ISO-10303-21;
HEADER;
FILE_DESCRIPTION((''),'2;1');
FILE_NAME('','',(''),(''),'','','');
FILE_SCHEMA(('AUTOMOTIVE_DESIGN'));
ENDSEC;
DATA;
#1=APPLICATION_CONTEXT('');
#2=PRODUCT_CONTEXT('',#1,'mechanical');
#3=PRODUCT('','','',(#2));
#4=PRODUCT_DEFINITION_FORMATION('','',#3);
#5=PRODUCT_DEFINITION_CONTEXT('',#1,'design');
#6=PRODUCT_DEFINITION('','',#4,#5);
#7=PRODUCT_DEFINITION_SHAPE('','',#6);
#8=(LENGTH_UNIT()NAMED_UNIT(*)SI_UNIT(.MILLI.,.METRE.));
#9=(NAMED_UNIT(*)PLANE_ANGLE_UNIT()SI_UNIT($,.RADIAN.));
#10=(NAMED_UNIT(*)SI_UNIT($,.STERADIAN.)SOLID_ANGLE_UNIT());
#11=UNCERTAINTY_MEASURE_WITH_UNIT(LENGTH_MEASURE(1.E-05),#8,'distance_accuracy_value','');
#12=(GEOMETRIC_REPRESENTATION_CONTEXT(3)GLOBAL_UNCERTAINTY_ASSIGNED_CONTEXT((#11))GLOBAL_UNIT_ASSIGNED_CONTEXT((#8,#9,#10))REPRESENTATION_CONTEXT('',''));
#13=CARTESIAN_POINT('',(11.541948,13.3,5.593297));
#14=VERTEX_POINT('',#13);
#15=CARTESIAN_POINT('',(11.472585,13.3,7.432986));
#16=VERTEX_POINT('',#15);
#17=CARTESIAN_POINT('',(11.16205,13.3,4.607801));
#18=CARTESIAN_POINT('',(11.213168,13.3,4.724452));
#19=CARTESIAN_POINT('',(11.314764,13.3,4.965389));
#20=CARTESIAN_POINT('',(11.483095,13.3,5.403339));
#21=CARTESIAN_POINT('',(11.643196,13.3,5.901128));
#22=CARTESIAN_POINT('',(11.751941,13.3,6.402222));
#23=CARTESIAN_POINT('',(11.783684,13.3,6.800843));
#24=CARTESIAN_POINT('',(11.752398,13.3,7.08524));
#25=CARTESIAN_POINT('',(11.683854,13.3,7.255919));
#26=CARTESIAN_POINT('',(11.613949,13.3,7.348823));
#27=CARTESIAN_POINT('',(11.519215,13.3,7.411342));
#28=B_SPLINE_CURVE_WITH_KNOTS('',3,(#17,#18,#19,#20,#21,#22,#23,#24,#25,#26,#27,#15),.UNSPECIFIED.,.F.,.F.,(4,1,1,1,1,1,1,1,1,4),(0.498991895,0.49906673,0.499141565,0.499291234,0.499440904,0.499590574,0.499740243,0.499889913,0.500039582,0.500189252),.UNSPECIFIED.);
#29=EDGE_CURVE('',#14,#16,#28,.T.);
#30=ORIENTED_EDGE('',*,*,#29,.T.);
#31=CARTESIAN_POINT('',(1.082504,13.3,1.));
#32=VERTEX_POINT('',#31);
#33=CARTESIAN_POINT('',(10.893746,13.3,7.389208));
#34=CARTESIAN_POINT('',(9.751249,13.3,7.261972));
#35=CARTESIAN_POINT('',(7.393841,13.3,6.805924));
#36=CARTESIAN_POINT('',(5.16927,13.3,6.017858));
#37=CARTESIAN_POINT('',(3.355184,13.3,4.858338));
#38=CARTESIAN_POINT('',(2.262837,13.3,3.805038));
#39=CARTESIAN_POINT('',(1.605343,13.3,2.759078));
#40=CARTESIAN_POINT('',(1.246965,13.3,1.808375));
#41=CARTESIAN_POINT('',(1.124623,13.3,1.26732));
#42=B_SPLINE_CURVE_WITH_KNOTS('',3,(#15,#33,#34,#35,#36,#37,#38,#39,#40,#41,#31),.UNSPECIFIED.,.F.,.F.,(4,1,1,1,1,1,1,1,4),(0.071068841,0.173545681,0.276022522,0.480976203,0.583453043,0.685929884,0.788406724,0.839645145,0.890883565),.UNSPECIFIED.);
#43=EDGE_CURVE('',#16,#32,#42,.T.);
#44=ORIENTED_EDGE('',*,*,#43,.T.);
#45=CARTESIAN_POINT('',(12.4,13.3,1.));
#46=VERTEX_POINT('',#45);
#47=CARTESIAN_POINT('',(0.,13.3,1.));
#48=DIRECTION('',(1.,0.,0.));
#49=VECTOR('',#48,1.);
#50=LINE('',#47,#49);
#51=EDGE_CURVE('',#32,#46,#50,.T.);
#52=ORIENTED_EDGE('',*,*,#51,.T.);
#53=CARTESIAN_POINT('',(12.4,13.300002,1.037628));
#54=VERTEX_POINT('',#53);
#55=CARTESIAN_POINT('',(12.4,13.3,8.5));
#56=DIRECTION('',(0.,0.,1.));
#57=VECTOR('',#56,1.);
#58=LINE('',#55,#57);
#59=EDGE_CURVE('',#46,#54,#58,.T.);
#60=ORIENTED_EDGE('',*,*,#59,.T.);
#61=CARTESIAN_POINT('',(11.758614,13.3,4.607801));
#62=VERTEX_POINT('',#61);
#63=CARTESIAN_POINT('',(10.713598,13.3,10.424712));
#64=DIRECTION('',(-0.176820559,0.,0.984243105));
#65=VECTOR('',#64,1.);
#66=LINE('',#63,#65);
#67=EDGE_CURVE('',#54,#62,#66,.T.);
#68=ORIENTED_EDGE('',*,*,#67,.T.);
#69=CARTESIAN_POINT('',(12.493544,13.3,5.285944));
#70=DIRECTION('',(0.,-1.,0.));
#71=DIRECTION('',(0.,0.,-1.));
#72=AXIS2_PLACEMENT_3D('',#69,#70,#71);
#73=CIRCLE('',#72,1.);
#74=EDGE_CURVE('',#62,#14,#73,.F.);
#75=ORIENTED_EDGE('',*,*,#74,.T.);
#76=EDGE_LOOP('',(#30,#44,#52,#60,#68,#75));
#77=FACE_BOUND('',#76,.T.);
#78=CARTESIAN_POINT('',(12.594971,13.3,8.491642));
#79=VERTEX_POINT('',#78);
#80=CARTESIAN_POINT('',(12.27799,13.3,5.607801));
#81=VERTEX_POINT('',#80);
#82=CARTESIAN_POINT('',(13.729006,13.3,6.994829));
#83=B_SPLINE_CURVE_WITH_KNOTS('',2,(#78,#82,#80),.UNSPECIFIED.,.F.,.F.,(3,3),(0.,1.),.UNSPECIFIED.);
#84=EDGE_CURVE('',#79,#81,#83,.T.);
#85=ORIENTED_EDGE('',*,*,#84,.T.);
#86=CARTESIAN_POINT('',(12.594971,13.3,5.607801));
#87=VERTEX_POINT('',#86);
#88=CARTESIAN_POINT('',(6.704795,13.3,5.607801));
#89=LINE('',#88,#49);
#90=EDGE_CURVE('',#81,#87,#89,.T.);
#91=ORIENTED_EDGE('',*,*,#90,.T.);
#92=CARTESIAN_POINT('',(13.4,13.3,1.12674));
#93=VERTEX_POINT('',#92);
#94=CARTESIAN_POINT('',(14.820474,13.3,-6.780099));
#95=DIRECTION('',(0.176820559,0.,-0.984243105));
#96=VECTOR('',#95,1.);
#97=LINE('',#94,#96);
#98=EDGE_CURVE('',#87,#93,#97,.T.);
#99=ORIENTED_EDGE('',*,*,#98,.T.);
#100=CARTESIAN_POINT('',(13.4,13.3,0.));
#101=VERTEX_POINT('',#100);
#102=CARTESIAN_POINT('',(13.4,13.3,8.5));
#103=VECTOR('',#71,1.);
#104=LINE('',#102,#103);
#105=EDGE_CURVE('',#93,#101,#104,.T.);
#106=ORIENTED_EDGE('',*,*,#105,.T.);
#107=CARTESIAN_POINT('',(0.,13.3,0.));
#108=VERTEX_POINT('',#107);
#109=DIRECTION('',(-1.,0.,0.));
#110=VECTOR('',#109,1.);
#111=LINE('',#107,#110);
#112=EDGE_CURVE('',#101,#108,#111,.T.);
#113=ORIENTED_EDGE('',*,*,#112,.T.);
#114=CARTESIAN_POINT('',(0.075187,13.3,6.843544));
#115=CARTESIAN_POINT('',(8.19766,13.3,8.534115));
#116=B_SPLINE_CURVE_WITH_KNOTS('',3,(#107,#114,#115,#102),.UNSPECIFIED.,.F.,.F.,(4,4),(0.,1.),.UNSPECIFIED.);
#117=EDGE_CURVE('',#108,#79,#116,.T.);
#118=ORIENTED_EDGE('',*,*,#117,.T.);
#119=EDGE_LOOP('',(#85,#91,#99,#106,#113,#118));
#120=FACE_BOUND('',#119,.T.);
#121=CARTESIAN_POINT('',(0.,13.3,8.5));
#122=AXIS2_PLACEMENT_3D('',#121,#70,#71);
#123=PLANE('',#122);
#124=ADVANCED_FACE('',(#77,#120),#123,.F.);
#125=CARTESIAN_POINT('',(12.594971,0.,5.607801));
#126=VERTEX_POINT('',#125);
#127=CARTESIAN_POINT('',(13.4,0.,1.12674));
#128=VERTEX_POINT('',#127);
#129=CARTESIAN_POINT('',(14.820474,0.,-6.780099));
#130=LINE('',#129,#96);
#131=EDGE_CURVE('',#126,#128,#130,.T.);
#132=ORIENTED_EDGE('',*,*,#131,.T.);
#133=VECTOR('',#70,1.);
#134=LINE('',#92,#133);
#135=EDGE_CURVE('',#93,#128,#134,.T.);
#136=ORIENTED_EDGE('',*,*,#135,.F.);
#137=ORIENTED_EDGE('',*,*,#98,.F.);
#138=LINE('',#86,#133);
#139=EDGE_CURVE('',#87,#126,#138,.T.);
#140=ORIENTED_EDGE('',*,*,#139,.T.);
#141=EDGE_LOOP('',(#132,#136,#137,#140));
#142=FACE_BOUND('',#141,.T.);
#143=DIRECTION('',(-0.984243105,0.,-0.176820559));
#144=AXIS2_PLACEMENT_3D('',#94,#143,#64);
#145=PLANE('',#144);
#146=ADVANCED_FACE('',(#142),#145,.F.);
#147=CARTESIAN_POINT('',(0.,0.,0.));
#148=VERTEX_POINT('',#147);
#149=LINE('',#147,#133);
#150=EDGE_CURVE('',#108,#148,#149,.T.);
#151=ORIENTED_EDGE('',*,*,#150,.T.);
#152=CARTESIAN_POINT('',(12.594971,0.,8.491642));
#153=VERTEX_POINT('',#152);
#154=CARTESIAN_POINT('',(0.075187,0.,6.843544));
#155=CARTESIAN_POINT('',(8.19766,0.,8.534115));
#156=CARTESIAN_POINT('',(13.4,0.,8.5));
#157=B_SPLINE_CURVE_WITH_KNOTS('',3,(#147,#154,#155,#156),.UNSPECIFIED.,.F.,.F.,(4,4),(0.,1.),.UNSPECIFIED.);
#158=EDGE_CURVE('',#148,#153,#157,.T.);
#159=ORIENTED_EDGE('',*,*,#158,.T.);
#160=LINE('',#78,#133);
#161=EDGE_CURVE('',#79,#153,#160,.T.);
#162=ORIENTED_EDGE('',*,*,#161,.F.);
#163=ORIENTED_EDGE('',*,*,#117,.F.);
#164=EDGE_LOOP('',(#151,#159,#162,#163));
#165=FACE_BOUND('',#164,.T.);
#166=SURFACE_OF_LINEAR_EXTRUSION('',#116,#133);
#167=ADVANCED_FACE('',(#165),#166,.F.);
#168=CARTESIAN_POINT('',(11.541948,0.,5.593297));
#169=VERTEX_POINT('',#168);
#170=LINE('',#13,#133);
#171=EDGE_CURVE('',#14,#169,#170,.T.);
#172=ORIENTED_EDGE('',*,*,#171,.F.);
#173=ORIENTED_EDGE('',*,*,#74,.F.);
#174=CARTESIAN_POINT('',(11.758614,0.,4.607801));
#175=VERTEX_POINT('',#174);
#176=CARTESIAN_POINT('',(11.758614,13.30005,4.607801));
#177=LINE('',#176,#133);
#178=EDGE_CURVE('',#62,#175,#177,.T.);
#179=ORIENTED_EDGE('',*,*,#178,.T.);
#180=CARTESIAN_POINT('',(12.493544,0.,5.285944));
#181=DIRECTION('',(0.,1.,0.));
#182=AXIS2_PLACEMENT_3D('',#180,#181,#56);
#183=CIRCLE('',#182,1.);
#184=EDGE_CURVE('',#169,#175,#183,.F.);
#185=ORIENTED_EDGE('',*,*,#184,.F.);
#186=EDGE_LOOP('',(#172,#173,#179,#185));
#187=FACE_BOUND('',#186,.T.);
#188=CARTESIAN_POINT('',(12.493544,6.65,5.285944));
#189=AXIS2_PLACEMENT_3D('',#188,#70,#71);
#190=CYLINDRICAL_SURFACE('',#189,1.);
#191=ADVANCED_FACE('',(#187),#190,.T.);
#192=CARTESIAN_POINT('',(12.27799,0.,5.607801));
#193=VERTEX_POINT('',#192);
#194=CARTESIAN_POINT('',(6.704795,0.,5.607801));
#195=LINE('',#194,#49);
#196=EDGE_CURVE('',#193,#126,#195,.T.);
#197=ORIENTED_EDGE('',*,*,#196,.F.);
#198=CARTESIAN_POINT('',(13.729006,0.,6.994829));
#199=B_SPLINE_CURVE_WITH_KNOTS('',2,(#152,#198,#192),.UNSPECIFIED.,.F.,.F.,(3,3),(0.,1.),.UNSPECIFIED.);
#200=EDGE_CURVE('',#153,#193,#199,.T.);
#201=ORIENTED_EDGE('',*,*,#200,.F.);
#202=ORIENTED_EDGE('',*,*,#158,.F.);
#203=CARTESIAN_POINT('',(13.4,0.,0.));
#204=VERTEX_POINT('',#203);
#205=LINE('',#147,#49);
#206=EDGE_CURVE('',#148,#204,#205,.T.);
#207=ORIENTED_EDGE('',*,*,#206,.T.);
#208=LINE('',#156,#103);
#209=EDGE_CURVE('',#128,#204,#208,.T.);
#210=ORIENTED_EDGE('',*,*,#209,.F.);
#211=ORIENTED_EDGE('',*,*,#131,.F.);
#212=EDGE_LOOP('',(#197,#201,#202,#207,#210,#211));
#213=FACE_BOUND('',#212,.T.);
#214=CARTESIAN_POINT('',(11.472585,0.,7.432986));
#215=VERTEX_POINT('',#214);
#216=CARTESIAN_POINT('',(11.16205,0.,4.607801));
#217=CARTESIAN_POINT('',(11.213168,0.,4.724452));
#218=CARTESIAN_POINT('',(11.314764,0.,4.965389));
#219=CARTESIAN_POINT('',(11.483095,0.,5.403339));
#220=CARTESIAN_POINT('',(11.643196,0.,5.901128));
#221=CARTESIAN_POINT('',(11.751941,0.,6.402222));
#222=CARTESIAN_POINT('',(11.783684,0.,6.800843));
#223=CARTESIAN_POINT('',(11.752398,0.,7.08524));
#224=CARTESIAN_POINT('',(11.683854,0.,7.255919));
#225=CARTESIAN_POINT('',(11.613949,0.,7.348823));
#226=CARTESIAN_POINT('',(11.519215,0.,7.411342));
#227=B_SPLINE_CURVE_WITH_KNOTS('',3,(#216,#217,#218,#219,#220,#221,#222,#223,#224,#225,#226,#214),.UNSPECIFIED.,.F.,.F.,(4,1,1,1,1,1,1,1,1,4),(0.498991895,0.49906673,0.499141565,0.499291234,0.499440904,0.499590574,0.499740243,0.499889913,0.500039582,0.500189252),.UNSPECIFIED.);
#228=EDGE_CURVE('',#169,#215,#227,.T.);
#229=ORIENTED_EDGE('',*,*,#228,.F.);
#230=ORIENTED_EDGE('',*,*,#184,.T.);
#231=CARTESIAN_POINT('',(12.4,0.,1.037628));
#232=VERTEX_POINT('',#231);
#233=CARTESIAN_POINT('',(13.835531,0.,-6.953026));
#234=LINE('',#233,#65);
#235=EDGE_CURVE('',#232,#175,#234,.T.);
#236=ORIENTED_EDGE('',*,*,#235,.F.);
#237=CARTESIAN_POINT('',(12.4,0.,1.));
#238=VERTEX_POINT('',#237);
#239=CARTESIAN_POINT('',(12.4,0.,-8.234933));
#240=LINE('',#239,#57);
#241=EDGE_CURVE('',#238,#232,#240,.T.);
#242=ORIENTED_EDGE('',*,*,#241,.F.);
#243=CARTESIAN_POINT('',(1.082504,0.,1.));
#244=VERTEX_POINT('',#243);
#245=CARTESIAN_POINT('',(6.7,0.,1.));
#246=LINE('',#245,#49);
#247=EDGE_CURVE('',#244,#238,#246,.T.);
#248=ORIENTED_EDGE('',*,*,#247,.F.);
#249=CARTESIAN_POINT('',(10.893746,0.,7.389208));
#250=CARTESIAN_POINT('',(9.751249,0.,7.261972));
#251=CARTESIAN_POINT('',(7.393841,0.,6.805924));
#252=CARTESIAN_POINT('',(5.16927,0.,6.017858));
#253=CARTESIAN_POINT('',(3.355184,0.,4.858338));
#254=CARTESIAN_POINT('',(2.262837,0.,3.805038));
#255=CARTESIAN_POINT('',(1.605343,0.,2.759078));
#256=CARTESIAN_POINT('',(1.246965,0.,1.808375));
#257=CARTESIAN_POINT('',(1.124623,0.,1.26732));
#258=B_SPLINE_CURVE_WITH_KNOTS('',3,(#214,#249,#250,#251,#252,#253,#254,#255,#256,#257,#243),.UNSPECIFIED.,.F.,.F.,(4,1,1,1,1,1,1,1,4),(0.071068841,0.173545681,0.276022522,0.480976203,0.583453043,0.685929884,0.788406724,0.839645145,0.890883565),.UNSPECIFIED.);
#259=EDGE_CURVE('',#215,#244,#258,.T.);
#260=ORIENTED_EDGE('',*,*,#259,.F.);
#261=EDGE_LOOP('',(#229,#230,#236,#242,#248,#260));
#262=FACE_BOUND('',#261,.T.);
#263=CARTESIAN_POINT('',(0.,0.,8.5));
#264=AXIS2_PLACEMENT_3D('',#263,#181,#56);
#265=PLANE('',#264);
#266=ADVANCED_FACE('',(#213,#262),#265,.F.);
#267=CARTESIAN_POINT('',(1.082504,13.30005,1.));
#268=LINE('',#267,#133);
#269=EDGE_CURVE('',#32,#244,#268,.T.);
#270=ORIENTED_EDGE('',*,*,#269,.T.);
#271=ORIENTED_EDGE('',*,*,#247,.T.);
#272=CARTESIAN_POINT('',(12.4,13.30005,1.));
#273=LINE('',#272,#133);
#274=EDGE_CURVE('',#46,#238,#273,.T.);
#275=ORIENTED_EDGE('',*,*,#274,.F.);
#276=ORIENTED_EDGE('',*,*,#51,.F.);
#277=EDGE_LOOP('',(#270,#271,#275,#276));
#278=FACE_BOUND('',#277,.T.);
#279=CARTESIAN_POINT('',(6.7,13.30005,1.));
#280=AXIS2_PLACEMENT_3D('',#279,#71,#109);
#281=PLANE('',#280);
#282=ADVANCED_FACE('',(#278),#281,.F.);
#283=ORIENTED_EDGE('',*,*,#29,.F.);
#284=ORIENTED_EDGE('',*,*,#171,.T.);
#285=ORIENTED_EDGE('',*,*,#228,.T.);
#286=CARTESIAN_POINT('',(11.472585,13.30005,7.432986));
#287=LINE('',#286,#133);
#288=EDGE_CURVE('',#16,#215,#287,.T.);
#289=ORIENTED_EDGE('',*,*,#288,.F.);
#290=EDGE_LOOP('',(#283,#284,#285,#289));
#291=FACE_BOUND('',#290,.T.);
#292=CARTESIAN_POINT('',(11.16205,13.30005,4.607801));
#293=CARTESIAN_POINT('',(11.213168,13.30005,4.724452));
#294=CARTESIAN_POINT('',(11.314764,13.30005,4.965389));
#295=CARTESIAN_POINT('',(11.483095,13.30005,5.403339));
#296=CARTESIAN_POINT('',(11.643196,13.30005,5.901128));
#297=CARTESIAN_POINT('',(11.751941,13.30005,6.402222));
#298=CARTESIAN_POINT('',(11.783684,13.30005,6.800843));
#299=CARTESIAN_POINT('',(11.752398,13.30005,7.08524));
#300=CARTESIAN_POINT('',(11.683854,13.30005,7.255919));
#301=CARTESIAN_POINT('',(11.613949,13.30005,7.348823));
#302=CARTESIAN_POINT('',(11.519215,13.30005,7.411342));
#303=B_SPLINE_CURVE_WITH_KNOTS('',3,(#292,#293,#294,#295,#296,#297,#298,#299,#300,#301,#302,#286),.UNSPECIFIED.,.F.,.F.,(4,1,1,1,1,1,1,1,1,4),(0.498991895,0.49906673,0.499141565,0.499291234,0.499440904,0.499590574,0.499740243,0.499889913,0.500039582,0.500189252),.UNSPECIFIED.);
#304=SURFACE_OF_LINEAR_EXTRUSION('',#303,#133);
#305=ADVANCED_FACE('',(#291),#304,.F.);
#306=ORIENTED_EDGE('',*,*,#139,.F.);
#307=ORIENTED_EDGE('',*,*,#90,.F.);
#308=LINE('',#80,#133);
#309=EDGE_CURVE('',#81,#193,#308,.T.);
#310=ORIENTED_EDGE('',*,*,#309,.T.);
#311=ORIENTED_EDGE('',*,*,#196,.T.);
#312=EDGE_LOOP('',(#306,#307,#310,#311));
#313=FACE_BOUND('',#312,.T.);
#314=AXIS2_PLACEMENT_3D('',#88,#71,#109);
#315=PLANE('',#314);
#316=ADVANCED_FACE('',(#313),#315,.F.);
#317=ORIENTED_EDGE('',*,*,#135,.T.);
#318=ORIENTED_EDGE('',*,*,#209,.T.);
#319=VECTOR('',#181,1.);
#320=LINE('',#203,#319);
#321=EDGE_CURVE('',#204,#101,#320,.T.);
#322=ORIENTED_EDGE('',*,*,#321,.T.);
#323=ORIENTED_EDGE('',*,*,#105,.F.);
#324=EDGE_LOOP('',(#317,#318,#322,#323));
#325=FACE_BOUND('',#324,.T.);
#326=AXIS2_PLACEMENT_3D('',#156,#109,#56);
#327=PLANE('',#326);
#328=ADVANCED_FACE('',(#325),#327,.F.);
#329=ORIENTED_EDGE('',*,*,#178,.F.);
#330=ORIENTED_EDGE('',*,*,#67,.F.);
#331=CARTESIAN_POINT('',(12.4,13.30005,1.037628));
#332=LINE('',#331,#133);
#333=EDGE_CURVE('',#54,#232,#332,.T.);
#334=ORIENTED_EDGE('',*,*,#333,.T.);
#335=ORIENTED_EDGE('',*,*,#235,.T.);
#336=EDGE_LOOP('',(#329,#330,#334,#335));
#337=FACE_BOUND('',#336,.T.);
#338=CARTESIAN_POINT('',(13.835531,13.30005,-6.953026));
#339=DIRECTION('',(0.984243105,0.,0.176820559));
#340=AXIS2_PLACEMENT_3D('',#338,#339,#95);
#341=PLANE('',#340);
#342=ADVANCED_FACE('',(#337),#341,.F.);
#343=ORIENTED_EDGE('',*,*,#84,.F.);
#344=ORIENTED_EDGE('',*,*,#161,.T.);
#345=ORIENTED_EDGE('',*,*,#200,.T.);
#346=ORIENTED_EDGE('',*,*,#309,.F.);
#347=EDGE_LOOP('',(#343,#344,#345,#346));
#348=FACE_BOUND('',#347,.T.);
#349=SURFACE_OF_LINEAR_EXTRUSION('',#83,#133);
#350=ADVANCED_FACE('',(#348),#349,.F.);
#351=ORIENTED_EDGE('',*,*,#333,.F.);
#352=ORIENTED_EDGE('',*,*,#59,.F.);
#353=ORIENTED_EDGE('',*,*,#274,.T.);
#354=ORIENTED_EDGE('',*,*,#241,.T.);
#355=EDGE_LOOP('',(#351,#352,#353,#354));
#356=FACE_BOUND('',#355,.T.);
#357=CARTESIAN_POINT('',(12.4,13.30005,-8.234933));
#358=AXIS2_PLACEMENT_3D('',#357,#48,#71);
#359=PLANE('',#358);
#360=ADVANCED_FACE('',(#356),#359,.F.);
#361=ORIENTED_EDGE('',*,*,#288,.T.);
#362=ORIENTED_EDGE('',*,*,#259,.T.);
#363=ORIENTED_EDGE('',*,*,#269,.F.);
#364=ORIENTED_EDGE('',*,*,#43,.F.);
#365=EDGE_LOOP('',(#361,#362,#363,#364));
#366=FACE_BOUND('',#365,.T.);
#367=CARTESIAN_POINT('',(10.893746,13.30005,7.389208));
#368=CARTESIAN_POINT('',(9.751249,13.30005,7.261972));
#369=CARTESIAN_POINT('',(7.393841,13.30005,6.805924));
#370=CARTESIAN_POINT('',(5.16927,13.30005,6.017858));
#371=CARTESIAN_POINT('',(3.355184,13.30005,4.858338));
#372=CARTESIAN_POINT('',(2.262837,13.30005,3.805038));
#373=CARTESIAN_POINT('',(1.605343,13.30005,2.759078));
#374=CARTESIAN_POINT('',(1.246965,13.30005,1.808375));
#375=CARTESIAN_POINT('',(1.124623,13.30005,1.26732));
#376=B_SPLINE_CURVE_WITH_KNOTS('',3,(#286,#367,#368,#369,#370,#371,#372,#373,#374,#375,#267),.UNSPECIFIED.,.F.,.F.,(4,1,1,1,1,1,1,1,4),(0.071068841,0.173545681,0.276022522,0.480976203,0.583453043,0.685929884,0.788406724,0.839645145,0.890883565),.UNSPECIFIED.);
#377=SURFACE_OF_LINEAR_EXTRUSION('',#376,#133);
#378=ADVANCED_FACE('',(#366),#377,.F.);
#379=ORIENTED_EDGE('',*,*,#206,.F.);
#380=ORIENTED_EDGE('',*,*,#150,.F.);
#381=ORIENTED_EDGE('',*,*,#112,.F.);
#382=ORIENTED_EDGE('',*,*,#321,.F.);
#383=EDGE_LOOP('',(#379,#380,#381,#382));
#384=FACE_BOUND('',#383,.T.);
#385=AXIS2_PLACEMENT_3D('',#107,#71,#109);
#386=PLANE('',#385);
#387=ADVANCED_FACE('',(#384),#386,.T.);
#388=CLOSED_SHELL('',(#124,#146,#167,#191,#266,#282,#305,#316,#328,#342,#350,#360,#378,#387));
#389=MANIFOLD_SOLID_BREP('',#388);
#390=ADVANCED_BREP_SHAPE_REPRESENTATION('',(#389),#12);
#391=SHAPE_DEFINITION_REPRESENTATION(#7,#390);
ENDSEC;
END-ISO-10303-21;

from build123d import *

# Parameters (mm, degrees)
SKETCH1_W           = 13.4
SKETCH1_H           = 13.3
BOSS_EXTRUDE1_DEPTH = 8.5
CUT_EXTRUDE1_DEPTH  = 21.705071842
CUT_EXTRUDE3_DEPTH  = 21.705072012
CUT_EXTRUDE4_DEPTH  = 21.701642146
FILLET1_R           = 1


with BuildPart() as part:
    # Sketch1 → Boss-Extrude1 (new body)
    with BuildSketch(Plane.XY):
        with Locations((6.7, 6.65)):
            Rectangle(SKETCH1_W, SKETCH1_H)
    extrude(amount=BOSS_EXTRUDE1_DEPTH)

    # Sketch2 → Cut-Extrude1 (cut, through all)
    with BuildSketch(Plane.XZ):
        with BuildLine():
            Line((0, 8.5), (0, 0))
            add(Edge.make_bspline(
                [(0, 0), (0.073718654, 6.709903839), (7.883498374, 8.466123585), (13.091968121, 8.5)],
                knots=[0, 0, 0, 0, 0.980472066, 0.980472066, 0.980472066, 0.980472066], degree=3))
            Line((13.091968121, 8.5), (0, 8.5))
        make_face()
    extrude(amount=-CUT_EXTRUDE1_DEPTH, mode=Mode.SUBTRACT)

    # Sketch3 → Cut-Extrude3 (cut, through all)
    with BuildSketch(Plane.XZ):
        with BuildLine():
            Line((13.4, 8.5), (13.091968233, 8.5))
            add(Edge.make_bspline(
                [(13.091968233, 8.500000001), (12.928751092, 8.498938421), (12.762979466, 8.4961855), (12.594971465, 8.491641803)],
                knots=[0, 0, 0, 0, 0.030724926, 0.030724926, 0.030724926, 0.030724926], degree=3))
            add(Edge.make_bspline(
                [(12.594971465, 8.491641803), (13.729005702, 6.994828786), (12.27798969, 5.607801465)],
                knots=[0, 0, 0, 1, 1, 1], degree=2))
            Line((12.27798969, 5.607801465), (12.594971465, 5.607801465))
            Line((12.594971465, 5.607801465), (13.4, 1.126740045))
            Line((13.4, 1.126740045), (13.4, 8.5))
        make_face()
    extrude(amount=-CUT_EXTRUDE3_DEPTH, mode=Mode.SUBTRACT)

    # Sketch4 → Cut-Extrude4 (cut, through all)
    with BuildSketch(Plane.XZ):
        with BuildLine():
            add(Edge.make_bspline(
                [(11.162050454, 4.607801465), (11.213167508, 4.724451541), (11.314763824, 4.965389249), (11.483094832, 5.403338852), (11.643196268, 5.901128047), (11.751940563, 6.402221541), (11.783684476, 6.800842723), (11.752398283, 7.085240041), (11.683853846, 7.255919003), (11.613948948, 7.348822838), (11.519214994, 7.411341569), (11.47258496, 7.432985767)],
                knots=[0.498991895, 0.498991895, 0.498991895, 0.498991895, 0.49906673, 0.499141565, 0.499291234, 0.499440904, 0.499590574, 0.499740243, 0.499889913, 0.500039582, 0.500189252, 0.500189252, 0.500189252, 0.500189252], degree=3))
            add(Edge.make_bspline(
                [(11.47258496, 7.432985767), (10.893745911, 7.38920843), (9.751249116, 7.261972079), (7.393841399, 6.805923692), (5.169270178, 6.017857558), (3.35518405, 4.858338166), (2.262837237, 3.805038418), (1.60534323, 2.759077747), (1.24696522, 1.808375346), (1.124623135, 1.267320349), (1.082503612, 1)],
                knots=[0.071068841, 0.071068841, 0.071068841, 0.071068841, 0.173545681, 0.276022522, 0.480976203, 0.583453043, 0.685929884, 0.788406724, 0.839645145, 0.890883565, 0.890883565, 0.890883565, 0.890883565], degree=3))
            Line((1.082503612, 1), (12.4, 1))
            Line((12.4, 1), (12.4, 1.037627698))
            Line((12.4, 1.037627698), (11.758613621, 4.607801465))
            Line((11.758613621, 4.607801465), (11.162050454, 4.607801465))
        make_face()
    extrude(amount=-CUT_EXTRUDE4_DEPTH, mode=Mode.SUBTRACT)

    # Fillet1
    # the kernel refuses this fillet: 1 mm, written as the material it takes off along each edge
    with BuildSketch(Plane(origin=(11.162050454, -2.640459986, 4.607801465), x_dir=(1, 0, 0), z_dir=(0, 1, 0))) as fillet1_piece_1:
        with BuildLine():
            CenterArc((1.331493249, -0.678142887), FILLET1_R, 137.301308413, 60.598480339)
            Line((0.379897712, -0.985495996), (0.360865801, -0.991643059))
            ThreePointArc((0.360865801, -0.991643059), (0.183572865, -0.495225733), (-0.018318378, -0.008027269))
            Line((-0.018318378, -0.008027269), (0, 0.02))
            ThreePointArc((0, 0.02), (0.298281584, 0.02), (0.581864566, 0.013562858))
            Line((0.581864566, 0.013562858), (0.596563167, 0))
        make_face()
    extrude(amount=18.580919972, mode=Mode.SUBTRACT)


solid = part.part
